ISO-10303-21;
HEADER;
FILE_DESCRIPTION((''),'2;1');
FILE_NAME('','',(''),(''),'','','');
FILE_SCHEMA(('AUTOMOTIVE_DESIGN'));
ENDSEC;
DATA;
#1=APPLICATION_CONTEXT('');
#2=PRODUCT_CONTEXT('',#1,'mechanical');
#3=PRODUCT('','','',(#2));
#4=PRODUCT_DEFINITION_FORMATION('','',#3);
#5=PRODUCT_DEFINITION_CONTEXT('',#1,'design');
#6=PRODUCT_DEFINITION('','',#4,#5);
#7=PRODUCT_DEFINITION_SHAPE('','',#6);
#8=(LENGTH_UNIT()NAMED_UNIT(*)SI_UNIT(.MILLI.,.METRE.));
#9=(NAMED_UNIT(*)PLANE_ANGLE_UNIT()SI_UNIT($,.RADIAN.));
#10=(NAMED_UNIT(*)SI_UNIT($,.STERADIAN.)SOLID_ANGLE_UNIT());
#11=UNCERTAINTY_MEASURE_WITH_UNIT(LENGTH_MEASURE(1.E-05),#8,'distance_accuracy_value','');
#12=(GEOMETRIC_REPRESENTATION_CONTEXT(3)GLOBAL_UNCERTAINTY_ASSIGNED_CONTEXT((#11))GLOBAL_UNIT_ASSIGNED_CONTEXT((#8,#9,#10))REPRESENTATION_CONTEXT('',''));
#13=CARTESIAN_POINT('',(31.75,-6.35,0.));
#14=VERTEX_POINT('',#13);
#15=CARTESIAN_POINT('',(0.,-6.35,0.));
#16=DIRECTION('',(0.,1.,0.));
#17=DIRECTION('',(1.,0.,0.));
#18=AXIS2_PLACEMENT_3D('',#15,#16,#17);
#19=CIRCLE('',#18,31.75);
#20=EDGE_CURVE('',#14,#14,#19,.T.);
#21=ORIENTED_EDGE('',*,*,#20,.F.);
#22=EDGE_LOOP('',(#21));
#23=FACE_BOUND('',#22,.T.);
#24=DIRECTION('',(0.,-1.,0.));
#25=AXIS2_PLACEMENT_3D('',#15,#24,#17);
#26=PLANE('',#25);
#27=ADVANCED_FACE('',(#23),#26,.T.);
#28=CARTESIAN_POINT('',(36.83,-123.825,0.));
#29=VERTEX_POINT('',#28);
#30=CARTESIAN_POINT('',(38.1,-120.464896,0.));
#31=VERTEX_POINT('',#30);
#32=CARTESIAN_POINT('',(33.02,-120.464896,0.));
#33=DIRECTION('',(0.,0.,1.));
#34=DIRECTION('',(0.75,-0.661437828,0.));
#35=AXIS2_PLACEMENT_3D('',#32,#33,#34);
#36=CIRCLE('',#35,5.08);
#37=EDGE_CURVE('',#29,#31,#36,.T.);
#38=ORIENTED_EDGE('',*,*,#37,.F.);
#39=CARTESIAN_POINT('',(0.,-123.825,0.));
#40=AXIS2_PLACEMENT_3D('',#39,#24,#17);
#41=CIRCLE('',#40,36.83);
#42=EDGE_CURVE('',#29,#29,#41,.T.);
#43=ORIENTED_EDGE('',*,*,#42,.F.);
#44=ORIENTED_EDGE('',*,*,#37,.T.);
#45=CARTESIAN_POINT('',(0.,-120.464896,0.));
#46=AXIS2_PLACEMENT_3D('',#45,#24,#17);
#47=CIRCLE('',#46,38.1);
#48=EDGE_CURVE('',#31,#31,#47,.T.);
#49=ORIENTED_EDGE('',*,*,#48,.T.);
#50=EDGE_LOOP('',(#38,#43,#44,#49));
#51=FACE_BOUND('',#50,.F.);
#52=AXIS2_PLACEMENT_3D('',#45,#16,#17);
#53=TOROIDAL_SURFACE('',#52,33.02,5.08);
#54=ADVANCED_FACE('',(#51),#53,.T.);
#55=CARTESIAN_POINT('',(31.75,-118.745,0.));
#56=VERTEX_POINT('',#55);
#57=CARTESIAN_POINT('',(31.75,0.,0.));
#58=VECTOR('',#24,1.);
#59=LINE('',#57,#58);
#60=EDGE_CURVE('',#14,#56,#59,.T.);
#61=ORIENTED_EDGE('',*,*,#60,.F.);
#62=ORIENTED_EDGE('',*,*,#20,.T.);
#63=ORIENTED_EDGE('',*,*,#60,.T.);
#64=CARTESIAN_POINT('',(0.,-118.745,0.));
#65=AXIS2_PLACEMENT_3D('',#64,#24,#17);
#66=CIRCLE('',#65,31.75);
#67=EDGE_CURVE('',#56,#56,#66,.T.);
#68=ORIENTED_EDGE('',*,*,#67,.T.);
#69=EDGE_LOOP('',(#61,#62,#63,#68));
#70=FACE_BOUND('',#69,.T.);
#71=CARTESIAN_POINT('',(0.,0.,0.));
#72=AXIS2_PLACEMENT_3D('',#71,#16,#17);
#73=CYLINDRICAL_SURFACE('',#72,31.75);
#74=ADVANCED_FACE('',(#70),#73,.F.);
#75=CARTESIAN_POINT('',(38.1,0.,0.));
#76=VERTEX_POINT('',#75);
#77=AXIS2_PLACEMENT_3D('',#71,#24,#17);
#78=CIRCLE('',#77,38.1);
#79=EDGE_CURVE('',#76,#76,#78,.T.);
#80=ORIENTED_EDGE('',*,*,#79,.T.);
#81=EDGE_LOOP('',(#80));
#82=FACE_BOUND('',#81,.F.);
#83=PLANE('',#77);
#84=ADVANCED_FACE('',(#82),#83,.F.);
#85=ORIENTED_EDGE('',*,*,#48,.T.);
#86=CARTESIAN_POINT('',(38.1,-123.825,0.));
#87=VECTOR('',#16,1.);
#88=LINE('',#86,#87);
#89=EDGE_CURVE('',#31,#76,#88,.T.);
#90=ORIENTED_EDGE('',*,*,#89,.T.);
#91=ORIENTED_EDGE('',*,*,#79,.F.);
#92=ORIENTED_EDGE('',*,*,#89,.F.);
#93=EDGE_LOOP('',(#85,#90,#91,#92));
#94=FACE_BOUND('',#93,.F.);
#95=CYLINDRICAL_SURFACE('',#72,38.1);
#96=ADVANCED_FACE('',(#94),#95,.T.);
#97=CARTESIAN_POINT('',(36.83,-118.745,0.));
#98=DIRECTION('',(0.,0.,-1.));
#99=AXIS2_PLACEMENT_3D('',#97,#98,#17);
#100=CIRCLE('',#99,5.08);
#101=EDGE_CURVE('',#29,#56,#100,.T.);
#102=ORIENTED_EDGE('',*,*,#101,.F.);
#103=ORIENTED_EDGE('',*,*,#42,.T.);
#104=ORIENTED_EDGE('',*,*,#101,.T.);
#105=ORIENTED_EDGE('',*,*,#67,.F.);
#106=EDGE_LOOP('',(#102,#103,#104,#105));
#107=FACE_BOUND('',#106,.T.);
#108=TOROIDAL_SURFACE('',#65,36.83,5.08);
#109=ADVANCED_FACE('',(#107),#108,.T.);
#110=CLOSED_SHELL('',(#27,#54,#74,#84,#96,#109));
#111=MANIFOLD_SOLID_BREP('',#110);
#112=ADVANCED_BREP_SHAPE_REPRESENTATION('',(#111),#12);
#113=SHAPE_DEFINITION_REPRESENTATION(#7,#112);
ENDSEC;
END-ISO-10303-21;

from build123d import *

# Parameters (mm, degrees)
F0_R     = 38.1
F0_R_2   = 31.75
F1_DEPTH = 123.825
F2_R     = 38.1
F3_DEPTH = 6.35
F4_R     = 5.08


# Not quite as in the source:
# - a fillet or chamfer that OpenCascade refuses, or shapes differently, is made with other operations: its cross-section is extruded or revolved along the edge and cut away or added


with BuildPart() as f1:
    # F0 (on Front) → F1 (new body)
    with BuildSketch(Plane.XZ):
        Circle(F0_R)
        Circle(F0_R_2, mode=Mode.SUBTRACT)
    extrude(amount=F1_DEPTH)

    # F2 (on Front) → F3 (join)
    with BuildSketch(Plane.XZ):
        Circle(F2_R)
    extrude(amount=F3_DEPTH)

    # F4
    f4_edges = [f1.edges().sort_by_distance(p)[0] for p in [
        (-31.75, -123.825, 0),
    ]]
    fillet(f4_edges, radius=F4_R)

    # F5: fillet of radius 5.08 on 1 edges, made by hand

    # F5_s1 → F5_t2 (revolve, cut)
    with BuildSketch(Plane.XY):
        with BuildLine():
            ThreePointArc((36.83, -123.825), (37.7719048812, -122.2609470592), (38.1, -120.4648958349))
            Line((38.1, -120.4648958349), (38.1, -123.825))
            Line((38.1, -123.825), (36.83, -123.825))
        make_face()
    revolve(axis=Axis((0, -123.825, 0), (0, -1, 0)), mode=Mode.SUBTRACT)


solid = f1.part
